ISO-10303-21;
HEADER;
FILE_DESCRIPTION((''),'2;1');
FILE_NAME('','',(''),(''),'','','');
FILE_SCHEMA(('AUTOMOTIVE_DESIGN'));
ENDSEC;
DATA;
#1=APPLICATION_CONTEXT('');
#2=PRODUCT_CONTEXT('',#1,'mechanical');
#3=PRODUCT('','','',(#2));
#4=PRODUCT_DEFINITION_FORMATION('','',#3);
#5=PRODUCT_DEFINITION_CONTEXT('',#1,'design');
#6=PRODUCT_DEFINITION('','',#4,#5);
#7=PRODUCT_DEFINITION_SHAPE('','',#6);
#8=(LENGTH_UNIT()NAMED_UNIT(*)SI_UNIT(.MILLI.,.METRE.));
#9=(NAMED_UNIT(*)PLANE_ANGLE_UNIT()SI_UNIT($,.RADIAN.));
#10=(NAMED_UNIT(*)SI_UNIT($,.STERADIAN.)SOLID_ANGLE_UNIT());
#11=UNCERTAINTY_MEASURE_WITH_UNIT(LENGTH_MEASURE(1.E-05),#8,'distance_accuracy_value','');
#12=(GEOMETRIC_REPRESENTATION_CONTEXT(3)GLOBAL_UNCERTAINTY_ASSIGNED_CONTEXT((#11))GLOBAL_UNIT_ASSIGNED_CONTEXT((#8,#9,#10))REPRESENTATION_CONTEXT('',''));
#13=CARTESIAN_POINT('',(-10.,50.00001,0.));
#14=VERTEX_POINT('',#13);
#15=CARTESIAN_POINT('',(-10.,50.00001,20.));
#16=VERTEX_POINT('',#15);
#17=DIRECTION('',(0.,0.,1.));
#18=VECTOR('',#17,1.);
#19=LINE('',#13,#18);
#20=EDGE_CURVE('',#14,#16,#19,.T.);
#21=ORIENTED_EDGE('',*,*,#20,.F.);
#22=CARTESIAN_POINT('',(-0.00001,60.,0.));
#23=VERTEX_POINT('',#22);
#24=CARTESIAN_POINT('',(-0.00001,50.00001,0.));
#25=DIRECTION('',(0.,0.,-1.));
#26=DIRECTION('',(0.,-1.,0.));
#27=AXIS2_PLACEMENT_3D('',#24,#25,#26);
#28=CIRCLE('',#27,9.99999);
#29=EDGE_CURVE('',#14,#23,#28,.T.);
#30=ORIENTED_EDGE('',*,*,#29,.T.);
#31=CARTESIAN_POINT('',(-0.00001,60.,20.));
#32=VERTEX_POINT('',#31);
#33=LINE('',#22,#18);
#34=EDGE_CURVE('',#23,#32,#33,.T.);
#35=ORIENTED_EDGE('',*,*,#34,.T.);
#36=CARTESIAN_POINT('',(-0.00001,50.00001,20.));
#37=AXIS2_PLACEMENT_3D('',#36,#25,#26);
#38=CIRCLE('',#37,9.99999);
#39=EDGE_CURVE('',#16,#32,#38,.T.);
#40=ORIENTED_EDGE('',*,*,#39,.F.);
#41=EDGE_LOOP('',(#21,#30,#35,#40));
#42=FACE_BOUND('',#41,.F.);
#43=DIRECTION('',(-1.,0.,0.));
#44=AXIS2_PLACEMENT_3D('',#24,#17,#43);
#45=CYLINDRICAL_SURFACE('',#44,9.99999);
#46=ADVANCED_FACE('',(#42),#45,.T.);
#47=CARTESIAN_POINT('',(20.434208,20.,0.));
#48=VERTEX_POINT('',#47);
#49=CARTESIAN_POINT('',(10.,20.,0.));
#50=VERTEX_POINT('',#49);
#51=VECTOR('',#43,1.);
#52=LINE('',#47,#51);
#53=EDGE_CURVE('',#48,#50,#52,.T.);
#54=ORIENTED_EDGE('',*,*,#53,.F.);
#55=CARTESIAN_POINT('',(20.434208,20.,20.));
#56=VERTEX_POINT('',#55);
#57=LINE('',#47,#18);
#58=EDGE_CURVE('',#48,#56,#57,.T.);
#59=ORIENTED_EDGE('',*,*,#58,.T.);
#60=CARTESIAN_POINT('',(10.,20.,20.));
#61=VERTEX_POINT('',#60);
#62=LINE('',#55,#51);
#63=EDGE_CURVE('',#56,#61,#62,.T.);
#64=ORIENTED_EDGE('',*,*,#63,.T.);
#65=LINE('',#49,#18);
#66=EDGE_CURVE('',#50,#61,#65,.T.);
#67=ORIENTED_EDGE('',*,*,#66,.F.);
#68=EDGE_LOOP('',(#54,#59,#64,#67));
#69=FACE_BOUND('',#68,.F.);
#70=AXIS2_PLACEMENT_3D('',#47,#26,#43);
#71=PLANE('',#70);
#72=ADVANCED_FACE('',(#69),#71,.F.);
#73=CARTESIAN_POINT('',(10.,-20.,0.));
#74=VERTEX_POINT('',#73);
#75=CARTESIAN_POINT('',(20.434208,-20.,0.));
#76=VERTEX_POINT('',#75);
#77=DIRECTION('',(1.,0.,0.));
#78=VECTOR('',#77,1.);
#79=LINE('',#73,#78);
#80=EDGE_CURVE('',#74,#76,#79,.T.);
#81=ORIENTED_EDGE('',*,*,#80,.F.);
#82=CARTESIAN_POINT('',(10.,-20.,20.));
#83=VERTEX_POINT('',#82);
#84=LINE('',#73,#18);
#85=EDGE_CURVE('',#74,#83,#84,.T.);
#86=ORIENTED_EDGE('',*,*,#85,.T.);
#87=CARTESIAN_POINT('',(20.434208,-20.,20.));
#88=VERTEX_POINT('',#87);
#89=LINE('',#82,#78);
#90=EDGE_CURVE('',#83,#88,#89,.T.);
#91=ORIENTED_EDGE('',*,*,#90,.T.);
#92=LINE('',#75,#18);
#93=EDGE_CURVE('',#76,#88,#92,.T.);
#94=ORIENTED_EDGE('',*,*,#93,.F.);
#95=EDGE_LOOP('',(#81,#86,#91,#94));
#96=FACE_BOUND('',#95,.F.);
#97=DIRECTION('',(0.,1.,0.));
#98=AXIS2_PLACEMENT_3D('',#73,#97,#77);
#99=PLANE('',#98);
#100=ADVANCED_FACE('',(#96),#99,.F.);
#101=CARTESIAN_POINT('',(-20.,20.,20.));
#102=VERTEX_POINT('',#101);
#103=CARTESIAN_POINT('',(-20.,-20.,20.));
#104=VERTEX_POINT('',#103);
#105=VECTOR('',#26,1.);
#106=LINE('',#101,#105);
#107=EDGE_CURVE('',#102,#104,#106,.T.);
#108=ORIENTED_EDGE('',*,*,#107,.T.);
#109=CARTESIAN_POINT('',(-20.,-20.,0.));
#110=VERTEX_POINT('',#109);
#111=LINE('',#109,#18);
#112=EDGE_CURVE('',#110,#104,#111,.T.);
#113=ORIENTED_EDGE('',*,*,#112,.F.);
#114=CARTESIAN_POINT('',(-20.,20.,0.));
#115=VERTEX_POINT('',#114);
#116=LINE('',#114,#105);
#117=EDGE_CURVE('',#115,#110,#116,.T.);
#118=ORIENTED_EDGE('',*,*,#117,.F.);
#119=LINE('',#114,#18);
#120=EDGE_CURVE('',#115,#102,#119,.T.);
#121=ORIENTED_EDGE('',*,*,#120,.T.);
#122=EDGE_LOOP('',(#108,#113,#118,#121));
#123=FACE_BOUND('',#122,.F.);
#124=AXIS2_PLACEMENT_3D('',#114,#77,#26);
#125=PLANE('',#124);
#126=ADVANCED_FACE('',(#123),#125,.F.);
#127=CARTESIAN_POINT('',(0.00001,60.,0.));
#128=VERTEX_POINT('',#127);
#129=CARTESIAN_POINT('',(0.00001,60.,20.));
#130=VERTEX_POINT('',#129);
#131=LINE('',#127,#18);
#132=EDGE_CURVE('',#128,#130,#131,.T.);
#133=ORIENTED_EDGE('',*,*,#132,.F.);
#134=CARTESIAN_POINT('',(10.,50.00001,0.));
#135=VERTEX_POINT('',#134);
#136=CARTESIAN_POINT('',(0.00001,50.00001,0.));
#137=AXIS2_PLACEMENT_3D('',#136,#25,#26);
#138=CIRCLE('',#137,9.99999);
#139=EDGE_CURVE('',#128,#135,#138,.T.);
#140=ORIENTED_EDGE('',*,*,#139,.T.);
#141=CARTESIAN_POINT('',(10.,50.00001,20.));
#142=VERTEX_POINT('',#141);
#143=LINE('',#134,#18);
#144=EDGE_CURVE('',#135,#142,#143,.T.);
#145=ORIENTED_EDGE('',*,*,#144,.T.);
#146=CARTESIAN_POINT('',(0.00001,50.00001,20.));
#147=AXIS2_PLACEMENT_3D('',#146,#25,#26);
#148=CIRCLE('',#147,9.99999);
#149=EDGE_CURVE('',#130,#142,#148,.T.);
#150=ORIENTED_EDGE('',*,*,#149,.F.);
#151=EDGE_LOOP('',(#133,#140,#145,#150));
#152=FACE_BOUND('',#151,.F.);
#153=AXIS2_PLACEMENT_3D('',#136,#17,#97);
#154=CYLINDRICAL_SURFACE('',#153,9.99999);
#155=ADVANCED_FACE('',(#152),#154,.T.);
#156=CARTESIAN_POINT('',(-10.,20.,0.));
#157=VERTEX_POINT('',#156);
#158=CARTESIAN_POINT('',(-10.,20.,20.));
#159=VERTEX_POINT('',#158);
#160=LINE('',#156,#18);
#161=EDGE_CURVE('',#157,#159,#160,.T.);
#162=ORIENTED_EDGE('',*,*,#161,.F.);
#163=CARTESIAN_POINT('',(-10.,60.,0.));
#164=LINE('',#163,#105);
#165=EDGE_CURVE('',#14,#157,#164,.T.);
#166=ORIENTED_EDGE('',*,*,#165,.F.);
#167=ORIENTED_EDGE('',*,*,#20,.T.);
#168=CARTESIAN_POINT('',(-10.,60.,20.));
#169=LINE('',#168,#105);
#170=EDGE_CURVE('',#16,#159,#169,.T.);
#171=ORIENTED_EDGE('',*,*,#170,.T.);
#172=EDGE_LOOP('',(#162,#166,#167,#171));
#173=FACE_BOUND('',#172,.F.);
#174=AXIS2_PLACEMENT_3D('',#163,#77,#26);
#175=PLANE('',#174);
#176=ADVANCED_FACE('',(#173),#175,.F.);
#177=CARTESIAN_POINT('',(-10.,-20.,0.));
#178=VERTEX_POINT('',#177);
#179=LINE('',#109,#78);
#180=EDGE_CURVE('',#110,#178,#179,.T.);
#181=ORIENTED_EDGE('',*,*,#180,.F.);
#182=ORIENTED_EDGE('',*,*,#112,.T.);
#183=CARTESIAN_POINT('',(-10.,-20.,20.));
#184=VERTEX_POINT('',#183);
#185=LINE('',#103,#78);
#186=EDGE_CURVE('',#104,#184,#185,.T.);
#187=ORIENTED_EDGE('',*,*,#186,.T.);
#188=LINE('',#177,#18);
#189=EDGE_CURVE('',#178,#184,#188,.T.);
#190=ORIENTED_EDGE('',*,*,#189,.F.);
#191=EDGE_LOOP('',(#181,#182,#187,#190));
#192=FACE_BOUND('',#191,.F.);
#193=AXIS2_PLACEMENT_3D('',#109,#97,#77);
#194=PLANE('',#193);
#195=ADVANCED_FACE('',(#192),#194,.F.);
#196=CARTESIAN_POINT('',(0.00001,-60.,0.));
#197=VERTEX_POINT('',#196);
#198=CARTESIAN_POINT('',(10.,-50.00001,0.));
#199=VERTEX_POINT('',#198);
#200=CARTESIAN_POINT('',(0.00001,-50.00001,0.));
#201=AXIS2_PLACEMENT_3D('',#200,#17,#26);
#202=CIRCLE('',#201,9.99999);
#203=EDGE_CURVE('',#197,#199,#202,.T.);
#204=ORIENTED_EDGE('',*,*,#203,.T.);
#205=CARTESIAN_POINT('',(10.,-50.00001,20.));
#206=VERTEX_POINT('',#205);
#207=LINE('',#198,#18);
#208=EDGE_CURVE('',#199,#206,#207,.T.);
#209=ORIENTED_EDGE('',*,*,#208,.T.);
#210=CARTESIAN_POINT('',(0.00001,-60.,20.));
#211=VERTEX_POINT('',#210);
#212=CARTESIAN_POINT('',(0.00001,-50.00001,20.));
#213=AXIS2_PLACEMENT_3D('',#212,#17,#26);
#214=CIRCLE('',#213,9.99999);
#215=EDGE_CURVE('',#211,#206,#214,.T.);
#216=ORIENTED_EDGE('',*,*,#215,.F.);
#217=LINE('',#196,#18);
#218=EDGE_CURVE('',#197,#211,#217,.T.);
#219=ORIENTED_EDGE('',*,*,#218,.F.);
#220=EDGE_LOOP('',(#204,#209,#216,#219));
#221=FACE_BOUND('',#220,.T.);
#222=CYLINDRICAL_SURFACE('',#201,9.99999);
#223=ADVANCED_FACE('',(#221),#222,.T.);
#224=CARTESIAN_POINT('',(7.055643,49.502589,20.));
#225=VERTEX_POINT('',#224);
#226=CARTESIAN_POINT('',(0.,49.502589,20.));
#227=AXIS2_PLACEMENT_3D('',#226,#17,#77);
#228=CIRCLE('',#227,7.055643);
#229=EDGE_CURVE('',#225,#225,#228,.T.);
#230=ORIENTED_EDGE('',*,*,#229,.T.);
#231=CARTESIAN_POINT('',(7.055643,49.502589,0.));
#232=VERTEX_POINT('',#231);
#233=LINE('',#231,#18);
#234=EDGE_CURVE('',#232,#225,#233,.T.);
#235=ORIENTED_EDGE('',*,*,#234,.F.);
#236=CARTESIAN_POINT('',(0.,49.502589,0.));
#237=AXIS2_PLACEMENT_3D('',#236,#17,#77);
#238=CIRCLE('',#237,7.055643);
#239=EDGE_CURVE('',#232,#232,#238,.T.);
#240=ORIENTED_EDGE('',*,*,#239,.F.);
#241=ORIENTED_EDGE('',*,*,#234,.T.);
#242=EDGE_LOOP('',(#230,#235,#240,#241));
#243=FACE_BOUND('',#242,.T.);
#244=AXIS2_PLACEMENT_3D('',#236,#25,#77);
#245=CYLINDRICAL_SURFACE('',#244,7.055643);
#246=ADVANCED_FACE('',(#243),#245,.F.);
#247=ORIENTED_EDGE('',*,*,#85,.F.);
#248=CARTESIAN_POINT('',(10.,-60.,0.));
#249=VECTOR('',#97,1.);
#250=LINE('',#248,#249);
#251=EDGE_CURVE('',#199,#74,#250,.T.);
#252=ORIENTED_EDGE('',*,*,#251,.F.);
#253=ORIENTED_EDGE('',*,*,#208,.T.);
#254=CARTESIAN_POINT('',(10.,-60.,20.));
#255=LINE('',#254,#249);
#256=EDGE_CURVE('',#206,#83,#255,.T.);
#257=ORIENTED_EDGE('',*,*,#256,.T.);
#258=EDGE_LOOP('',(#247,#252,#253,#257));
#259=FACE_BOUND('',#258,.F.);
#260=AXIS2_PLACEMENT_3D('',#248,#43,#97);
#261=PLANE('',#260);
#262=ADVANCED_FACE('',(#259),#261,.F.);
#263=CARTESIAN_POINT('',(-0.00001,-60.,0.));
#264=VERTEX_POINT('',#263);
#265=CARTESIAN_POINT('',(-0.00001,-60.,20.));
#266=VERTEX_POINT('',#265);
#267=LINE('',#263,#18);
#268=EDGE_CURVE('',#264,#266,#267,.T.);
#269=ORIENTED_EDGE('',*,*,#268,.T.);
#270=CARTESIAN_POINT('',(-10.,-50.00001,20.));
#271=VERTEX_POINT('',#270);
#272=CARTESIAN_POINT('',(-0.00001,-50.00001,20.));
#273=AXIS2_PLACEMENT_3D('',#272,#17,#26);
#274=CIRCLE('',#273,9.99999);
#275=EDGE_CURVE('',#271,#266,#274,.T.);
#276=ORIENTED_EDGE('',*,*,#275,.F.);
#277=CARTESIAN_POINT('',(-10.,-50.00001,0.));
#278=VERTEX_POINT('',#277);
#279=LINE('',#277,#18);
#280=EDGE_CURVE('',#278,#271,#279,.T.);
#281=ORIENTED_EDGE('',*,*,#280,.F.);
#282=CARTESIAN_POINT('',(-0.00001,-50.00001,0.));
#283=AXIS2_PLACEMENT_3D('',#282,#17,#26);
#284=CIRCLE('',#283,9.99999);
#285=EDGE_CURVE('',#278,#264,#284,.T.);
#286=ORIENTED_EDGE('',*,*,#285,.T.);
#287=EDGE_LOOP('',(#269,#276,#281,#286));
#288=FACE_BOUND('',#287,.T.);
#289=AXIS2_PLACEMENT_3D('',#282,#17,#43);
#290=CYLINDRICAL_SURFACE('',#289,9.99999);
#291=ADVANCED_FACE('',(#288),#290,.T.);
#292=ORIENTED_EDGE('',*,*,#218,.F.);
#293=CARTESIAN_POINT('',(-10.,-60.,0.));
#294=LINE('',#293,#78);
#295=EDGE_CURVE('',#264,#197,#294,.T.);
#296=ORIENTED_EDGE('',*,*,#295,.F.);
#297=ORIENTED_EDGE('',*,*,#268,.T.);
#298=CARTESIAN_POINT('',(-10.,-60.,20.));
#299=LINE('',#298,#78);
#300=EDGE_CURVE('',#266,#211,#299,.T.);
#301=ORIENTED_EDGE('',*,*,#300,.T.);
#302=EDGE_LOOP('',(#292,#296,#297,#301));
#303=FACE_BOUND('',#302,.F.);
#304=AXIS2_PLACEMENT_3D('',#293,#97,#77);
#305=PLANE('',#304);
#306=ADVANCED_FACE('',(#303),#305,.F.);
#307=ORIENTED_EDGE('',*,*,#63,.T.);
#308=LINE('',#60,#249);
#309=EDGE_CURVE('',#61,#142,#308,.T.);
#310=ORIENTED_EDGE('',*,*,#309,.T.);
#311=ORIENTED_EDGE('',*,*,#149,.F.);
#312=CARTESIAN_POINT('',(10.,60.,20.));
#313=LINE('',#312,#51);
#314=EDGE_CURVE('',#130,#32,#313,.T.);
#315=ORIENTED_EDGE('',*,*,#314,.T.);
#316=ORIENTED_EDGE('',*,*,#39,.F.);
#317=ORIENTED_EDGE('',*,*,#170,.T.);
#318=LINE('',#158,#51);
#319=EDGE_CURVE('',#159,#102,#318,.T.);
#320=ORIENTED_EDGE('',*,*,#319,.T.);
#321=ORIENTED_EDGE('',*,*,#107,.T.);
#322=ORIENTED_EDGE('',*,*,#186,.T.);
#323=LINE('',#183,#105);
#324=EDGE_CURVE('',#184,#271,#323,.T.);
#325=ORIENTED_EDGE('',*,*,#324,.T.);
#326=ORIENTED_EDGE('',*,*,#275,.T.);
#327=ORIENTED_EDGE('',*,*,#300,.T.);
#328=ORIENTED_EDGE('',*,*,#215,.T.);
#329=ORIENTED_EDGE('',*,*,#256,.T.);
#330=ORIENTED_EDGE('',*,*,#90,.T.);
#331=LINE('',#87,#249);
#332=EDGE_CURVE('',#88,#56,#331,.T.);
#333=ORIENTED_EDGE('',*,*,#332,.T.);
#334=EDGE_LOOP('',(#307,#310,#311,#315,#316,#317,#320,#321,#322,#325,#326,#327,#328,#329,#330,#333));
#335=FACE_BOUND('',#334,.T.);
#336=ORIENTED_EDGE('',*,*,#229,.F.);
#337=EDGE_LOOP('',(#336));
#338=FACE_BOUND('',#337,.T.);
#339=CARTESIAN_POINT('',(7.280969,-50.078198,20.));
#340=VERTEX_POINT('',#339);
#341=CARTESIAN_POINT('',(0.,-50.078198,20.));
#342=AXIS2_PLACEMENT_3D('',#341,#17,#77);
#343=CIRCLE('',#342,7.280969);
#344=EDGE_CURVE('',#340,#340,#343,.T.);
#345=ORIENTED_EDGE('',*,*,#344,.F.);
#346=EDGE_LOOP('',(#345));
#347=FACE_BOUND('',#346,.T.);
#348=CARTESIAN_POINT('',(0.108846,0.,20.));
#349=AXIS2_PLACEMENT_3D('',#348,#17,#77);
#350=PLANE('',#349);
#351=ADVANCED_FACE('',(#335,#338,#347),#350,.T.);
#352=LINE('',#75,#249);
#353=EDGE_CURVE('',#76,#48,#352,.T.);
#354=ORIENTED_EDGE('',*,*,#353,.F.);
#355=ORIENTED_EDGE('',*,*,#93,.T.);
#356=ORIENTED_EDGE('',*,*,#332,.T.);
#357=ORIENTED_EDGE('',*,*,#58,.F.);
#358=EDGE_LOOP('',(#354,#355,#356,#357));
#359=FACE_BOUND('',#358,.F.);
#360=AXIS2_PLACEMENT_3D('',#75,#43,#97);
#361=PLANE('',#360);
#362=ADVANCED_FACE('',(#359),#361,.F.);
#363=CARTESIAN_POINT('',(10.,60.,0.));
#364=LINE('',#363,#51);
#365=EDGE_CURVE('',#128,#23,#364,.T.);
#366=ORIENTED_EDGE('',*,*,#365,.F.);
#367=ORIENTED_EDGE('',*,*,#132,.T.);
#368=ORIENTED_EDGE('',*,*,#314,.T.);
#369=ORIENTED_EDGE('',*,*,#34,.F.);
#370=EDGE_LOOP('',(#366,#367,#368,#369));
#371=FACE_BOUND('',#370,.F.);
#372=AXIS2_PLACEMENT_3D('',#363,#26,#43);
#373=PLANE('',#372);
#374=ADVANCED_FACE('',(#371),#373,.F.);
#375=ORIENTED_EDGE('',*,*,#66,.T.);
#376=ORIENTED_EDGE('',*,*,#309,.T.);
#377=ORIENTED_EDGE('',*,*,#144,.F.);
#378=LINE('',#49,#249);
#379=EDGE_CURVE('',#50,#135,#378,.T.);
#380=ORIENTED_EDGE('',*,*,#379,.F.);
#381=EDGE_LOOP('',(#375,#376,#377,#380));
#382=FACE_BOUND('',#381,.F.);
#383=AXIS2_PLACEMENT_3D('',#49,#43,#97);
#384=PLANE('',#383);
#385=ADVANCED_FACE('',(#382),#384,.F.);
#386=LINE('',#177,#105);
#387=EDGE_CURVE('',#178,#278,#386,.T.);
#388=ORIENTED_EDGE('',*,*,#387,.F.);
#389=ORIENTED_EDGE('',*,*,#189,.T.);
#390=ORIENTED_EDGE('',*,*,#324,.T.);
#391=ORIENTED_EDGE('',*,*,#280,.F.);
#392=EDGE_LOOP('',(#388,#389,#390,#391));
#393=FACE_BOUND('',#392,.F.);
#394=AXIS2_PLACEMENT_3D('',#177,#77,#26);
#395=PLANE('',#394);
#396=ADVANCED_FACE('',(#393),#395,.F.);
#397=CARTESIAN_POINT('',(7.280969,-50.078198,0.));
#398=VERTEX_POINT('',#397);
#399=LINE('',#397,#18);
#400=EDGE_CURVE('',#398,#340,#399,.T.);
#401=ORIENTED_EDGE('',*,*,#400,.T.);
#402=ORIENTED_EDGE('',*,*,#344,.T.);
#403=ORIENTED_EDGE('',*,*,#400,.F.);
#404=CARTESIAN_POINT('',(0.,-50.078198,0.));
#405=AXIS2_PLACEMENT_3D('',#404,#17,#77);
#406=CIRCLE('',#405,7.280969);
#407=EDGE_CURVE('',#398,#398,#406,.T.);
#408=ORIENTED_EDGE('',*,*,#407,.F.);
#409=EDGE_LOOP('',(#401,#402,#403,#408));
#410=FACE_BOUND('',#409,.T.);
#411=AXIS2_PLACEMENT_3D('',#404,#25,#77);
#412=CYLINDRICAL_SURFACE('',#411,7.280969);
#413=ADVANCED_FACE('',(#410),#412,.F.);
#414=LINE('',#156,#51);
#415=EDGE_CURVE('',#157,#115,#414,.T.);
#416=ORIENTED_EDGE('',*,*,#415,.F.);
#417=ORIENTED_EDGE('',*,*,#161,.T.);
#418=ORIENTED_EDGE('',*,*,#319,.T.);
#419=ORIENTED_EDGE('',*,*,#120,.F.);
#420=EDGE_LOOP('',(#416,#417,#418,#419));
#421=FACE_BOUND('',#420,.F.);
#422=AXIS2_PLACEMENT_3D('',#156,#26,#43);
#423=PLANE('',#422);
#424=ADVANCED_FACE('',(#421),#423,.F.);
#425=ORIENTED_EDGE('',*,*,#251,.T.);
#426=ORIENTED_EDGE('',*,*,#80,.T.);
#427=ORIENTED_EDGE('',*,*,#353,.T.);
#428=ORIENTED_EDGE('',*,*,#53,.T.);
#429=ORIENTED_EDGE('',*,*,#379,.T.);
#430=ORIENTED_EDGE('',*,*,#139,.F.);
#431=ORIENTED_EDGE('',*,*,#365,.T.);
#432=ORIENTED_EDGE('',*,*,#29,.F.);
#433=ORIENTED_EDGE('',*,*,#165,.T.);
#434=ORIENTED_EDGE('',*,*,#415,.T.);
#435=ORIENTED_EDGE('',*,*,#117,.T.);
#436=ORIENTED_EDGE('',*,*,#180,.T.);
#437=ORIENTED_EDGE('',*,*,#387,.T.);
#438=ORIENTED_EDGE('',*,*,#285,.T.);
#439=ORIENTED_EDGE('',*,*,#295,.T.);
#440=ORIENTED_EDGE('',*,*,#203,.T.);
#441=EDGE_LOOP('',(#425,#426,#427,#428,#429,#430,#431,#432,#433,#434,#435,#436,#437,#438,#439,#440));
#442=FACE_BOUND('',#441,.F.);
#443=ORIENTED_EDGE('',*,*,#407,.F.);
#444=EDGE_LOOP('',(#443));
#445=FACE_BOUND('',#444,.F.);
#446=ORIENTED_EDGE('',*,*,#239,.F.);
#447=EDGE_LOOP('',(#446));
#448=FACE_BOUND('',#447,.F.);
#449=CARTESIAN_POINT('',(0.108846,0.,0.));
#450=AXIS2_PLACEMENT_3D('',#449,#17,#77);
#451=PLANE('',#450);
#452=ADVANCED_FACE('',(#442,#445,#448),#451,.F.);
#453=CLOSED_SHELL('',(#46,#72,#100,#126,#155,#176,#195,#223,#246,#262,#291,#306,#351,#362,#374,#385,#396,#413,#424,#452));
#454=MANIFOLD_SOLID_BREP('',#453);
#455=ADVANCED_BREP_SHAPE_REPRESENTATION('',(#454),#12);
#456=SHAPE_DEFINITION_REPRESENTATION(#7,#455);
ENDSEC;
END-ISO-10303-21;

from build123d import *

# Parameters (mm, degrees)
F0_R     = 7.2809687116
F0_R_2   = 7.0556428797
F1_DEPTH = 20
F2_R     = 9.99999


# Not quite as in the source:
# - a fillet or chamfer is up to 0.001 mm smaller than in the source, because OpenCascade refuses the exact size


with BuildPart() as f1:
    # F0 (on Top) → F1 (new body)
    with BuildSketch(Plane.XY):
        Polygon((-20, 20), (-20, 0), (-20, -20), (-10, -20), (-10, -60), (10, -60), (10, -20), (20.4342082143, -20), (20.4342082143, 20), (10, 20), (10, 60), (-10, 60), (-10, 20), align=None)
        with Locations((0, -50.0781983137)):
            Circle(F0_R, mode=Mode.SUBTRACT)
        with Locations((0, 49.5025888085)):
            Circle(F0_R_2, mode=Mode.SUBTRACT)
    extrude(amount=F1_DEPTH)

    # F2 (radius 10 in the source; OpenCascade refuses exactly that, so slightly less here)
    f2_edges = [f1.edges().sort_by_distance(p)[0] for p in [
        (10, 60, 10),
        (-10, 60, 10),
        (10, -60, 10),
        (-10, -60, 10),
    ]]
    fillet(f2_edges, radius=F2_R)


solid = f1.part
